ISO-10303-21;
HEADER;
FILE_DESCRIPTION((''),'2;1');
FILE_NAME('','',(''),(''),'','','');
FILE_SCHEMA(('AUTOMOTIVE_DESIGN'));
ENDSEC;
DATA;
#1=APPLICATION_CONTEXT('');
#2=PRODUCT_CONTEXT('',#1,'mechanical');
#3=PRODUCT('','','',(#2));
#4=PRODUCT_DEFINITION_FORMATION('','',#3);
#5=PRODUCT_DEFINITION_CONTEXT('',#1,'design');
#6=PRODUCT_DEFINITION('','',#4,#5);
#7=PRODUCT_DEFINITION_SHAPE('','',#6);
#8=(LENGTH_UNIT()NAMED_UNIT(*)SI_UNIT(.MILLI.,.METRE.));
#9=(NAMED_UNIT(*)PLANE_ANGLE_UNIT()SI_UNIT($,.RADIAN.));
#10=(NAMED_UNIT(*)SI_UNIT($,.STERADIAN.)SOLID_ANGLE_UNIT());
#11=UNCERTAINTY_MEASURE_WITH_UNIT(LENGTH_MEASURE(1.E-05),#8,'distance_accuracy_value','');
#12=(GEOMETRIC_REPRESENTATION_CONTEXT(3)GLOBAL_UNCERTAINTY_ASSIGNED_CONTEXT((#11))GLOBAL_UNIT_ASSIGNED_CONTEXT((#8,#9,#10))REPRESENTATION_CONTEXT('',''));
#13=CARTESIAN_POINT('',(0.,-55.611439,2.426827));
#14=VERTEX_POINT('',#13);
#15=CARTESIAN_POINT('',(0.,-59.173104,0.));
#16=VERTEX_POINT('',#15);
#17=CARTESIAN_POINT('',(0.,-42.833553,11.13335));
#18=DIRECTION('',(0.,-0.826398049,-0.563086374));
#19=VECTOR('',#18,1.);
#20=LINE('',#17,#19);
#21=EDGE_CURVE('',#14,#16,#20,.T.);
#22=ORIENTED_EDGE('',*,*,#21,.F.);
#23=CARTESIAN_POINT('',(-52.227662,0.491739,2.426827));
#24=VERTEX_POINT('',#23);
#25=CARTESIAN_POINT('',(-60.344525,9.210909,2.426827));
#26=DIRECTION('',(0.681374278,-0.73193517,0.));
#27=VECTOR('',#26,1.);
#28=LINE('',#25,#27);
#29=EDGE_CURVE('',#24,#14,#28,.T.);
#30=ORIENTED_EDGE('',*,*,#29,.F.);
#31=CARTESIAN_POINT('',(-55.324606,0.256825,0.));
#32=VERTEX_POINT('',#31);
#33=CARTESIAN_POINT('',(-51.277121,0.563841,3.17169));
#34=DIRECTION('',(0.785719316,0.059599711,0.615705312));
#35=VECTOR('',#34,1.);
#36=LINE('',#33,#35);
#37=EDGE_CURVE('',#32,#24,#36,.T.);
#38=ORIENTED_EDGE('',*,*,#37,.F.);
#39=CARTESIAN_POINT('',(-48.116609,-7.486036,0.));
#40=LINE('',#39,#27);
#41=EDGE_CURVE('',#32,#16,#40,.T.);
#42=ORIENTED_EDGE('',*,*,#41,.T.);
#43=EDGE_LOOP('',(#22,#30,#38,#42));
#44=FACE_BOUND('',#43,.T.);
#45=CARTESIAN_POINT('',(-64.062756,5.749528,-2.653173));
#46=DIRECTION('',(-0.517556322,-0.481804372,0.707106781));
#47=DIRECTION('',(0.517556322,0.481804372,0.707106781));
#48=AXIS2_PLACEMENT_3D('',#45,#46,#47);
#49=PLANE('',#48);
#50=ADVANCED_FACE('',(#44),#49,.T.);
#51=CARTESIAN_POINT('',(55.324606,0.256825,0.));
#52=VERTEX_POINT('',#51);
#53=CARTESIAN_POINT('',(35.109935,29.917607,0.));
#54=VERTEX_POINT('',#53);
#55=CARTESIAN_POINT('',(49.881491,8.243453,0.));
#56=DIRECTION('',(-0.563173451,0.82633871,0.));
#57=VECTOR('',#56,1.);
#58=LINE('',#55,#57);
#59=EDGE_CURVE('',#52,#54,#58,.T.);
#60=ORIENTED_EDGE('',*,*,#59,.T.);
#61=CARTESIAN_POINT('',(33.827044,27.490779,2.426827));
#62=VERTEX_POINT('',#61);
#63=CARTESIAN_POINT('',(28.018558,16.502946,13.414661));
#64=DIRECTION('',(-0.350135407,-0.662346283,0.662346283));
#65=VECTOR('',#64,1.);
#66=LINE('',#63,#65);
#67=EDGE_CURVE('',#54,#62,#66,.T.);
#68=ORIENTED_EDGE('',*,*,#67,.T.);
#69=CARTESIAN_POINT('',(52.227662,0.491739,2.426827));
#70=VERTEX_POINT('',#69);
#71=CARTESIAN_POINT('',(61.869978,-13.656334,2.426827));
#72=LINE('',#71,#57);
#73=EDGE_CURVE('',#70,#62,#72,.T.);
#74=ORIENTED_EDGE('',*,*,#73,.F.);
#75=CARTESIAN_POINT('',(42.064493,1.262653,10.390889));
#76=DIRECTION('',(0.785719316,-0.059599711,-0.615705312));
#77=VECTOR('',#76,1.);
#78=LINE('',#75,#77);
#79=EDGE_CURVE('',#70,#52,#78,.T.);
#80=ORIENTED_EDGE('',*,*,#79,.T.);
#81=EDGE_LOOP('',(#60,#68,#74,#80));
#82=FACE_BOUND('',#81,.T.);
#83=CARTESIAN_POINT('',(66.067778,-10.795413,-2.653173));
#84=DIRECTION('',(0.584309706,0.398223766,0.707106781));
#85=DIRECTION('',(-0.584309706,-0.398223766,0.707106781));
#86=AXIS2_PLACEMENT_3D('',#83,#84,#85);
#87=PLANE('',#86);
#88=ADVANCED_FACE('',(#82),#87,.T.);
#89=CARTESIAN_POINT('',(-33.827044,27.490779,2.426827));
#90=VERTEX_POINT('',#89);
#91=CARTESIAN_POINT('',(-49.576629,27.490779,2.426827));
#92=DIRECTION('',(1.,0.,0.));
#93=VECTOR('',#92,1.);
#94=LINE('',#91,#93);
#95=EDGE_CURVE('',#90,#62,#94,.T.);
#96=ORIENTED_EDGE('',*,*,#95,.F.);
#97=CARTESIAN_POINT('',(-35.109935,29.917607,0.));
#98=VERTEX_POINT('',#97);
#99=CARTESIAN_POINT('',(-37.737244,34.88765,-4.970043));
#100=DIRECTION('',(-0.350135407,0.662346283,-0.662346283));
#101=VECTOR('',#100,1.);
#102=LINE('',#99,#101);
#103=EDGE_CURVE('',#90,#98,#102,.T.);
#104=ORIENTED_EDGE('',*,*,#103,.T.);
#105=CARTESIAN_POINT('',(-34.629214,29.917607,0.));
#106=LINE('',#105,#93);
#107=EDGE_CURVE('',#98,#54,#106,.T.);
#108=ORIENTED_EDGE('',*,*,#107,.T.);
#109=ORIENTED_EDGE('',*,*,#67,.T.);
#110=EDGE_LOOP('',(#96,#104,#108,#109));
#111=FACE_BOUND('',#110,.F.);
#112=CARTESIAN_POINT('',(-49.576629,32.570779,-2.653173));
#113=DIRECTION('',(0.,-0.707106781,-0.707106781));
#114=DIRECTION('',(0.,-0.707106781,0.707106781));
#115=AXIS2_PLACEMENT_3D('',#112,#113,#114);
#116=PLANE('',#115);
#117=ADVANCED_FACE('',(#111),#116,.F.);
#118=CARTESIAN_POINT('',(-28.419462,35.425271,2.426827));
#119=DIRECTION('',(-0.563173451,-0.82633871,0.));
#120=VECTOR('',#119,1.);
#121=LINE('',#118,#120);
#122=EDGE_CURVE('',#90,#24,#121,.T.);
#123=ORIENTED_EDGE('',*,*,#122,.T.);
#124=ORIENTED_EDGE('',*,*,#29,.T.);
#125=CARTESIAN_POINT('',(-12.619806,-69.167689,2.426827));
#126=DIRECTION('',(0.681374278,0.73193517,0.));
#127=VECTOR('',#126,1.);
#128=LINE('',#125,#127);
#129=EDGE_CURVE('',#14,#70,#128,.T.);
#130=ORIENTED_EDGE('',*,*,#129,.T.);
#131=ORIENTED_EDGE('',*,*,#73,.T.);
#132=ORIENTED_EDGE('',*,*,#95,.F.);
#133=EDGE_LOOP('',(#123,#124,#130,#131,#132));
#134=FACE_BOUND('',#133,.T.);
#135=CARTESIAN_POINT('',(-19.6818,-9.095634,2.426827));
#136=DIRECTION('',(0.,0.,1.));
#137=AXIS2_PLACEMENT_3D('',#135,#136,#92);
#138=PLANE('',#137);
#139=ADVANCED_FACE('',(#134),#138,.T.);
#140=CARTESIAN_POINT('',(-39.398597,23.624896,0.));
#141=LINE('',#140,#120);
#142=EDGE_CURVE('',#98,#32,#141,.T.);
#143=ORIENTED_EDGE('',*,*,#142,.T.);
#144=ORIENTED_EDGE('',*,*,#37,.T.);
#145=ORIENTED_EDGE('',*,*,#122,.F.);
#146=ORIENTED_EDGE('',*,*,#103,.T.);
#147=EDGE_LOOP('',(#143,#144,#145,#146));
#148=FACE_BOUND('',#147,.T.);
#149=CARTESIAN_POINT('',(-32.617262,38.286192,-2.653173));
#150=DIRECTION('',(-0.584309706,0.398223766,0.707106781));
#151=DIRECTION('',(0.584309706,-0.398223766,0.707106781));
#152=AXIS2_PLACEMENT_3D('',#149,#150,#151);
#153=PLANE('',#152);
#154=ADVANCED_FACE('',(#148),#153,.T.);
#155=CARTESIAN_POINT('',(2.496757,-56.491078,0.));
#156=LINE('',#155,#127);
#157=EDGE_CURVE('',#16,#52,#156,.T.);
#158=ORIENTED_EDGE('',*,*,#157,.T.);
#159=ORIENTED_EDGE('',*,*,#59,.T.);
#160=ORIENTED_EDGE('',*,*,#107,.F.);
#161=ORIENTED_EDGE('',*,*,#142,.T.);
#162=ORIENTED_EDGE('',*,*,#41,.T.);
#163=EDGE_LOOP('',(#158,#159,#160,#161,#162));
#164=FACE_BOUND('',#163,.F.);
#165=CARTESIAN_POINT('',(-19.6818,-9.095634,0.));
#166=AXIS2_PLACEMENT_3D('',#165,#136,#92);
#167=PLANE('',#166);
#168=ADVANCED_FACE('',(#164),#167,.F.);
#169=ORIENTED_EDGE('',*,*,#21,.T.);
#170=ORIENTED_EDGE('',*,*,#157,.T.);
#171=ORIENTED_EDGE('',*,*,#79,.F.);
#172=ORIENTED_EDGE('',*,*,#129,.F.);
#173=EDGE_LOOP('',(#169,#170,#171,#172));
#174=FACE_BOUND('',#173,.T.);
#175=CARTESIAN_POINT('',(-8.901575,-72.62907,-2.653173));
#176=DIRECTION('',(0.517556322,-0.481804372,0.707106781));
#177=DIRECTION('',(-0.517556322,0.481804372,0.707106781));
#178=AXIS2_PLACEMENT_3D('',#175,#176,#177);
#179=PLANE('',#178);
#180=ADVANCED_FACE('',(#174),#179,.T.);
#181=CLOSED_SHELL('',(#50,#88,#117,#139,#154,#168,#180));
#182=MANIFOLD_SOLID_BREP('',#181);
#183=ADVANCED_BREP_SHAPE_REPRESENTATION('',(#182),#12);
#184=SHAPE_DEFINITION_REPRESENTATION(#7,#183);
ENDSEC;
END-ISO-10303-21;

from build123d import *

# Parameters (mm, degrees)
F1_DEPTH    = 2.4268273264
F2_T1_DEPTH = 99.1532575298
F3_T1_DEPTH = 59.396472342
F4_T1_DEPTH = 59.396472342
F5_T1_DEPTH = 107.0840707021
F6_T1_DEPTH = 101.9910508867


# Not quite as in the source:
# - a fillet or chamfer that OpenCascade refuses, or shapes differently, is made with other operations: its cross-section is extruded or revolved along the edge and cut away or added


with BuildPart() as f1:
    # F0 (on Top) → F1 (new body)
    with BuildSketch(Plane.XY):
        Polygon((0, 32.5707793236), (-36.5124791861, 32.5707793236), (-58.7103962898, 0), (0, -63.0669593811), align=None)
        Polygon((36.5124791861, 32.5707793236), (0, 32.5707793236), (0, -63.0669593811), (58.7103962898, 0), align=None)
    extrude(amount=F1_DEPTH)

    # F2: chamfer of 5.08 on 1 edges, made by hand

    # F2_s2 → F2_t1 (cut)
    with BuildSketch(Plane.YZ.offset(-49.5766287649)):
        Polygon((32.5707793236, -2.6531726736), (27.4907793236, 2.4268273264), (32.5707793236, 2.4268273264), align=None)
    extrude(amount=F2_T1_DEPTH, mode=Mode.SUBTRACT)

    # F3: chamfer of 5.08 on 1 edges, made by hand

    # F3_s2 → F3_t1 (cut)
    with BuildSketch(Plane(origin=(7.4722902543, 10.964015938, 0), x_dir=(0, 0, 1), z_dir=(-0.5631734509, -0.8263387103, 0))):
        Polygon((-2.6531726736, 48.5146731522), (2.4268273264, 43.4346731522), (2.4268273264, 48.5146731522), align=None)
    extrude(amount=F3_T1_DEPTH, mode=Mode.SUBTRACT)

    # F4: chamfer of 5.08 on 1 edges, made by hand

    # F4_s2 → F4_t1 (cut)
    with BuildSketch(Plane(origin=(25.9782260477, -38.1175884143, 0), x_dir=(0, 0, 1), z_dir=(-0.5631734509, 0.8263387103, 0))):
        Polygon((-2.6531726736, 48.5146731522), (2.4268273264, 43.4346731522), (2.4268273264, 48.5146731522), align=None)
    extrude(amount=F4_T1_DEPTH, mode=Mode.SUBTRACT)

    # F5: chamfer of 5.08 on 1 edges, made by hand

    # F5_s2 → F5_t1 (cut)
    with BuildSketch(Plane(origin=(-40.354442867, -43.3489155239, 0), x_dir=(0, 0, 1), z_dir=(0.6813742779, 0.7319351703, 0))):
        Polygon((-2.6531726736, 42.9722039049), (2.4268273264, 37.8922039049), (2.4268273264, 42.9722039049), align=None)
    extrude(amount=F5_T1_DEPTH, mode=Mode.SUBTRACT)

    # F6: chamfer of 5.08 on 1 edges, made by hand

    # F6_s2 → F6_t1 (cut)
    with BuildSketch(Plane(origin=(-32.6098884775, 35.0296819984, 0), x_dir=(0, 0, 1), z_dir=(0.6813742779, -0.7319351703, 0))):
        Polygon((-2.6531726736, 42.9722039049), (2.4268273264, 37.8922039049), (2.4268273264, 42.9722039049), align=None)
    extrude(amount=F6_T1_DEPTH, mode=Mode.SUBTRACT)


solid = f1.part
